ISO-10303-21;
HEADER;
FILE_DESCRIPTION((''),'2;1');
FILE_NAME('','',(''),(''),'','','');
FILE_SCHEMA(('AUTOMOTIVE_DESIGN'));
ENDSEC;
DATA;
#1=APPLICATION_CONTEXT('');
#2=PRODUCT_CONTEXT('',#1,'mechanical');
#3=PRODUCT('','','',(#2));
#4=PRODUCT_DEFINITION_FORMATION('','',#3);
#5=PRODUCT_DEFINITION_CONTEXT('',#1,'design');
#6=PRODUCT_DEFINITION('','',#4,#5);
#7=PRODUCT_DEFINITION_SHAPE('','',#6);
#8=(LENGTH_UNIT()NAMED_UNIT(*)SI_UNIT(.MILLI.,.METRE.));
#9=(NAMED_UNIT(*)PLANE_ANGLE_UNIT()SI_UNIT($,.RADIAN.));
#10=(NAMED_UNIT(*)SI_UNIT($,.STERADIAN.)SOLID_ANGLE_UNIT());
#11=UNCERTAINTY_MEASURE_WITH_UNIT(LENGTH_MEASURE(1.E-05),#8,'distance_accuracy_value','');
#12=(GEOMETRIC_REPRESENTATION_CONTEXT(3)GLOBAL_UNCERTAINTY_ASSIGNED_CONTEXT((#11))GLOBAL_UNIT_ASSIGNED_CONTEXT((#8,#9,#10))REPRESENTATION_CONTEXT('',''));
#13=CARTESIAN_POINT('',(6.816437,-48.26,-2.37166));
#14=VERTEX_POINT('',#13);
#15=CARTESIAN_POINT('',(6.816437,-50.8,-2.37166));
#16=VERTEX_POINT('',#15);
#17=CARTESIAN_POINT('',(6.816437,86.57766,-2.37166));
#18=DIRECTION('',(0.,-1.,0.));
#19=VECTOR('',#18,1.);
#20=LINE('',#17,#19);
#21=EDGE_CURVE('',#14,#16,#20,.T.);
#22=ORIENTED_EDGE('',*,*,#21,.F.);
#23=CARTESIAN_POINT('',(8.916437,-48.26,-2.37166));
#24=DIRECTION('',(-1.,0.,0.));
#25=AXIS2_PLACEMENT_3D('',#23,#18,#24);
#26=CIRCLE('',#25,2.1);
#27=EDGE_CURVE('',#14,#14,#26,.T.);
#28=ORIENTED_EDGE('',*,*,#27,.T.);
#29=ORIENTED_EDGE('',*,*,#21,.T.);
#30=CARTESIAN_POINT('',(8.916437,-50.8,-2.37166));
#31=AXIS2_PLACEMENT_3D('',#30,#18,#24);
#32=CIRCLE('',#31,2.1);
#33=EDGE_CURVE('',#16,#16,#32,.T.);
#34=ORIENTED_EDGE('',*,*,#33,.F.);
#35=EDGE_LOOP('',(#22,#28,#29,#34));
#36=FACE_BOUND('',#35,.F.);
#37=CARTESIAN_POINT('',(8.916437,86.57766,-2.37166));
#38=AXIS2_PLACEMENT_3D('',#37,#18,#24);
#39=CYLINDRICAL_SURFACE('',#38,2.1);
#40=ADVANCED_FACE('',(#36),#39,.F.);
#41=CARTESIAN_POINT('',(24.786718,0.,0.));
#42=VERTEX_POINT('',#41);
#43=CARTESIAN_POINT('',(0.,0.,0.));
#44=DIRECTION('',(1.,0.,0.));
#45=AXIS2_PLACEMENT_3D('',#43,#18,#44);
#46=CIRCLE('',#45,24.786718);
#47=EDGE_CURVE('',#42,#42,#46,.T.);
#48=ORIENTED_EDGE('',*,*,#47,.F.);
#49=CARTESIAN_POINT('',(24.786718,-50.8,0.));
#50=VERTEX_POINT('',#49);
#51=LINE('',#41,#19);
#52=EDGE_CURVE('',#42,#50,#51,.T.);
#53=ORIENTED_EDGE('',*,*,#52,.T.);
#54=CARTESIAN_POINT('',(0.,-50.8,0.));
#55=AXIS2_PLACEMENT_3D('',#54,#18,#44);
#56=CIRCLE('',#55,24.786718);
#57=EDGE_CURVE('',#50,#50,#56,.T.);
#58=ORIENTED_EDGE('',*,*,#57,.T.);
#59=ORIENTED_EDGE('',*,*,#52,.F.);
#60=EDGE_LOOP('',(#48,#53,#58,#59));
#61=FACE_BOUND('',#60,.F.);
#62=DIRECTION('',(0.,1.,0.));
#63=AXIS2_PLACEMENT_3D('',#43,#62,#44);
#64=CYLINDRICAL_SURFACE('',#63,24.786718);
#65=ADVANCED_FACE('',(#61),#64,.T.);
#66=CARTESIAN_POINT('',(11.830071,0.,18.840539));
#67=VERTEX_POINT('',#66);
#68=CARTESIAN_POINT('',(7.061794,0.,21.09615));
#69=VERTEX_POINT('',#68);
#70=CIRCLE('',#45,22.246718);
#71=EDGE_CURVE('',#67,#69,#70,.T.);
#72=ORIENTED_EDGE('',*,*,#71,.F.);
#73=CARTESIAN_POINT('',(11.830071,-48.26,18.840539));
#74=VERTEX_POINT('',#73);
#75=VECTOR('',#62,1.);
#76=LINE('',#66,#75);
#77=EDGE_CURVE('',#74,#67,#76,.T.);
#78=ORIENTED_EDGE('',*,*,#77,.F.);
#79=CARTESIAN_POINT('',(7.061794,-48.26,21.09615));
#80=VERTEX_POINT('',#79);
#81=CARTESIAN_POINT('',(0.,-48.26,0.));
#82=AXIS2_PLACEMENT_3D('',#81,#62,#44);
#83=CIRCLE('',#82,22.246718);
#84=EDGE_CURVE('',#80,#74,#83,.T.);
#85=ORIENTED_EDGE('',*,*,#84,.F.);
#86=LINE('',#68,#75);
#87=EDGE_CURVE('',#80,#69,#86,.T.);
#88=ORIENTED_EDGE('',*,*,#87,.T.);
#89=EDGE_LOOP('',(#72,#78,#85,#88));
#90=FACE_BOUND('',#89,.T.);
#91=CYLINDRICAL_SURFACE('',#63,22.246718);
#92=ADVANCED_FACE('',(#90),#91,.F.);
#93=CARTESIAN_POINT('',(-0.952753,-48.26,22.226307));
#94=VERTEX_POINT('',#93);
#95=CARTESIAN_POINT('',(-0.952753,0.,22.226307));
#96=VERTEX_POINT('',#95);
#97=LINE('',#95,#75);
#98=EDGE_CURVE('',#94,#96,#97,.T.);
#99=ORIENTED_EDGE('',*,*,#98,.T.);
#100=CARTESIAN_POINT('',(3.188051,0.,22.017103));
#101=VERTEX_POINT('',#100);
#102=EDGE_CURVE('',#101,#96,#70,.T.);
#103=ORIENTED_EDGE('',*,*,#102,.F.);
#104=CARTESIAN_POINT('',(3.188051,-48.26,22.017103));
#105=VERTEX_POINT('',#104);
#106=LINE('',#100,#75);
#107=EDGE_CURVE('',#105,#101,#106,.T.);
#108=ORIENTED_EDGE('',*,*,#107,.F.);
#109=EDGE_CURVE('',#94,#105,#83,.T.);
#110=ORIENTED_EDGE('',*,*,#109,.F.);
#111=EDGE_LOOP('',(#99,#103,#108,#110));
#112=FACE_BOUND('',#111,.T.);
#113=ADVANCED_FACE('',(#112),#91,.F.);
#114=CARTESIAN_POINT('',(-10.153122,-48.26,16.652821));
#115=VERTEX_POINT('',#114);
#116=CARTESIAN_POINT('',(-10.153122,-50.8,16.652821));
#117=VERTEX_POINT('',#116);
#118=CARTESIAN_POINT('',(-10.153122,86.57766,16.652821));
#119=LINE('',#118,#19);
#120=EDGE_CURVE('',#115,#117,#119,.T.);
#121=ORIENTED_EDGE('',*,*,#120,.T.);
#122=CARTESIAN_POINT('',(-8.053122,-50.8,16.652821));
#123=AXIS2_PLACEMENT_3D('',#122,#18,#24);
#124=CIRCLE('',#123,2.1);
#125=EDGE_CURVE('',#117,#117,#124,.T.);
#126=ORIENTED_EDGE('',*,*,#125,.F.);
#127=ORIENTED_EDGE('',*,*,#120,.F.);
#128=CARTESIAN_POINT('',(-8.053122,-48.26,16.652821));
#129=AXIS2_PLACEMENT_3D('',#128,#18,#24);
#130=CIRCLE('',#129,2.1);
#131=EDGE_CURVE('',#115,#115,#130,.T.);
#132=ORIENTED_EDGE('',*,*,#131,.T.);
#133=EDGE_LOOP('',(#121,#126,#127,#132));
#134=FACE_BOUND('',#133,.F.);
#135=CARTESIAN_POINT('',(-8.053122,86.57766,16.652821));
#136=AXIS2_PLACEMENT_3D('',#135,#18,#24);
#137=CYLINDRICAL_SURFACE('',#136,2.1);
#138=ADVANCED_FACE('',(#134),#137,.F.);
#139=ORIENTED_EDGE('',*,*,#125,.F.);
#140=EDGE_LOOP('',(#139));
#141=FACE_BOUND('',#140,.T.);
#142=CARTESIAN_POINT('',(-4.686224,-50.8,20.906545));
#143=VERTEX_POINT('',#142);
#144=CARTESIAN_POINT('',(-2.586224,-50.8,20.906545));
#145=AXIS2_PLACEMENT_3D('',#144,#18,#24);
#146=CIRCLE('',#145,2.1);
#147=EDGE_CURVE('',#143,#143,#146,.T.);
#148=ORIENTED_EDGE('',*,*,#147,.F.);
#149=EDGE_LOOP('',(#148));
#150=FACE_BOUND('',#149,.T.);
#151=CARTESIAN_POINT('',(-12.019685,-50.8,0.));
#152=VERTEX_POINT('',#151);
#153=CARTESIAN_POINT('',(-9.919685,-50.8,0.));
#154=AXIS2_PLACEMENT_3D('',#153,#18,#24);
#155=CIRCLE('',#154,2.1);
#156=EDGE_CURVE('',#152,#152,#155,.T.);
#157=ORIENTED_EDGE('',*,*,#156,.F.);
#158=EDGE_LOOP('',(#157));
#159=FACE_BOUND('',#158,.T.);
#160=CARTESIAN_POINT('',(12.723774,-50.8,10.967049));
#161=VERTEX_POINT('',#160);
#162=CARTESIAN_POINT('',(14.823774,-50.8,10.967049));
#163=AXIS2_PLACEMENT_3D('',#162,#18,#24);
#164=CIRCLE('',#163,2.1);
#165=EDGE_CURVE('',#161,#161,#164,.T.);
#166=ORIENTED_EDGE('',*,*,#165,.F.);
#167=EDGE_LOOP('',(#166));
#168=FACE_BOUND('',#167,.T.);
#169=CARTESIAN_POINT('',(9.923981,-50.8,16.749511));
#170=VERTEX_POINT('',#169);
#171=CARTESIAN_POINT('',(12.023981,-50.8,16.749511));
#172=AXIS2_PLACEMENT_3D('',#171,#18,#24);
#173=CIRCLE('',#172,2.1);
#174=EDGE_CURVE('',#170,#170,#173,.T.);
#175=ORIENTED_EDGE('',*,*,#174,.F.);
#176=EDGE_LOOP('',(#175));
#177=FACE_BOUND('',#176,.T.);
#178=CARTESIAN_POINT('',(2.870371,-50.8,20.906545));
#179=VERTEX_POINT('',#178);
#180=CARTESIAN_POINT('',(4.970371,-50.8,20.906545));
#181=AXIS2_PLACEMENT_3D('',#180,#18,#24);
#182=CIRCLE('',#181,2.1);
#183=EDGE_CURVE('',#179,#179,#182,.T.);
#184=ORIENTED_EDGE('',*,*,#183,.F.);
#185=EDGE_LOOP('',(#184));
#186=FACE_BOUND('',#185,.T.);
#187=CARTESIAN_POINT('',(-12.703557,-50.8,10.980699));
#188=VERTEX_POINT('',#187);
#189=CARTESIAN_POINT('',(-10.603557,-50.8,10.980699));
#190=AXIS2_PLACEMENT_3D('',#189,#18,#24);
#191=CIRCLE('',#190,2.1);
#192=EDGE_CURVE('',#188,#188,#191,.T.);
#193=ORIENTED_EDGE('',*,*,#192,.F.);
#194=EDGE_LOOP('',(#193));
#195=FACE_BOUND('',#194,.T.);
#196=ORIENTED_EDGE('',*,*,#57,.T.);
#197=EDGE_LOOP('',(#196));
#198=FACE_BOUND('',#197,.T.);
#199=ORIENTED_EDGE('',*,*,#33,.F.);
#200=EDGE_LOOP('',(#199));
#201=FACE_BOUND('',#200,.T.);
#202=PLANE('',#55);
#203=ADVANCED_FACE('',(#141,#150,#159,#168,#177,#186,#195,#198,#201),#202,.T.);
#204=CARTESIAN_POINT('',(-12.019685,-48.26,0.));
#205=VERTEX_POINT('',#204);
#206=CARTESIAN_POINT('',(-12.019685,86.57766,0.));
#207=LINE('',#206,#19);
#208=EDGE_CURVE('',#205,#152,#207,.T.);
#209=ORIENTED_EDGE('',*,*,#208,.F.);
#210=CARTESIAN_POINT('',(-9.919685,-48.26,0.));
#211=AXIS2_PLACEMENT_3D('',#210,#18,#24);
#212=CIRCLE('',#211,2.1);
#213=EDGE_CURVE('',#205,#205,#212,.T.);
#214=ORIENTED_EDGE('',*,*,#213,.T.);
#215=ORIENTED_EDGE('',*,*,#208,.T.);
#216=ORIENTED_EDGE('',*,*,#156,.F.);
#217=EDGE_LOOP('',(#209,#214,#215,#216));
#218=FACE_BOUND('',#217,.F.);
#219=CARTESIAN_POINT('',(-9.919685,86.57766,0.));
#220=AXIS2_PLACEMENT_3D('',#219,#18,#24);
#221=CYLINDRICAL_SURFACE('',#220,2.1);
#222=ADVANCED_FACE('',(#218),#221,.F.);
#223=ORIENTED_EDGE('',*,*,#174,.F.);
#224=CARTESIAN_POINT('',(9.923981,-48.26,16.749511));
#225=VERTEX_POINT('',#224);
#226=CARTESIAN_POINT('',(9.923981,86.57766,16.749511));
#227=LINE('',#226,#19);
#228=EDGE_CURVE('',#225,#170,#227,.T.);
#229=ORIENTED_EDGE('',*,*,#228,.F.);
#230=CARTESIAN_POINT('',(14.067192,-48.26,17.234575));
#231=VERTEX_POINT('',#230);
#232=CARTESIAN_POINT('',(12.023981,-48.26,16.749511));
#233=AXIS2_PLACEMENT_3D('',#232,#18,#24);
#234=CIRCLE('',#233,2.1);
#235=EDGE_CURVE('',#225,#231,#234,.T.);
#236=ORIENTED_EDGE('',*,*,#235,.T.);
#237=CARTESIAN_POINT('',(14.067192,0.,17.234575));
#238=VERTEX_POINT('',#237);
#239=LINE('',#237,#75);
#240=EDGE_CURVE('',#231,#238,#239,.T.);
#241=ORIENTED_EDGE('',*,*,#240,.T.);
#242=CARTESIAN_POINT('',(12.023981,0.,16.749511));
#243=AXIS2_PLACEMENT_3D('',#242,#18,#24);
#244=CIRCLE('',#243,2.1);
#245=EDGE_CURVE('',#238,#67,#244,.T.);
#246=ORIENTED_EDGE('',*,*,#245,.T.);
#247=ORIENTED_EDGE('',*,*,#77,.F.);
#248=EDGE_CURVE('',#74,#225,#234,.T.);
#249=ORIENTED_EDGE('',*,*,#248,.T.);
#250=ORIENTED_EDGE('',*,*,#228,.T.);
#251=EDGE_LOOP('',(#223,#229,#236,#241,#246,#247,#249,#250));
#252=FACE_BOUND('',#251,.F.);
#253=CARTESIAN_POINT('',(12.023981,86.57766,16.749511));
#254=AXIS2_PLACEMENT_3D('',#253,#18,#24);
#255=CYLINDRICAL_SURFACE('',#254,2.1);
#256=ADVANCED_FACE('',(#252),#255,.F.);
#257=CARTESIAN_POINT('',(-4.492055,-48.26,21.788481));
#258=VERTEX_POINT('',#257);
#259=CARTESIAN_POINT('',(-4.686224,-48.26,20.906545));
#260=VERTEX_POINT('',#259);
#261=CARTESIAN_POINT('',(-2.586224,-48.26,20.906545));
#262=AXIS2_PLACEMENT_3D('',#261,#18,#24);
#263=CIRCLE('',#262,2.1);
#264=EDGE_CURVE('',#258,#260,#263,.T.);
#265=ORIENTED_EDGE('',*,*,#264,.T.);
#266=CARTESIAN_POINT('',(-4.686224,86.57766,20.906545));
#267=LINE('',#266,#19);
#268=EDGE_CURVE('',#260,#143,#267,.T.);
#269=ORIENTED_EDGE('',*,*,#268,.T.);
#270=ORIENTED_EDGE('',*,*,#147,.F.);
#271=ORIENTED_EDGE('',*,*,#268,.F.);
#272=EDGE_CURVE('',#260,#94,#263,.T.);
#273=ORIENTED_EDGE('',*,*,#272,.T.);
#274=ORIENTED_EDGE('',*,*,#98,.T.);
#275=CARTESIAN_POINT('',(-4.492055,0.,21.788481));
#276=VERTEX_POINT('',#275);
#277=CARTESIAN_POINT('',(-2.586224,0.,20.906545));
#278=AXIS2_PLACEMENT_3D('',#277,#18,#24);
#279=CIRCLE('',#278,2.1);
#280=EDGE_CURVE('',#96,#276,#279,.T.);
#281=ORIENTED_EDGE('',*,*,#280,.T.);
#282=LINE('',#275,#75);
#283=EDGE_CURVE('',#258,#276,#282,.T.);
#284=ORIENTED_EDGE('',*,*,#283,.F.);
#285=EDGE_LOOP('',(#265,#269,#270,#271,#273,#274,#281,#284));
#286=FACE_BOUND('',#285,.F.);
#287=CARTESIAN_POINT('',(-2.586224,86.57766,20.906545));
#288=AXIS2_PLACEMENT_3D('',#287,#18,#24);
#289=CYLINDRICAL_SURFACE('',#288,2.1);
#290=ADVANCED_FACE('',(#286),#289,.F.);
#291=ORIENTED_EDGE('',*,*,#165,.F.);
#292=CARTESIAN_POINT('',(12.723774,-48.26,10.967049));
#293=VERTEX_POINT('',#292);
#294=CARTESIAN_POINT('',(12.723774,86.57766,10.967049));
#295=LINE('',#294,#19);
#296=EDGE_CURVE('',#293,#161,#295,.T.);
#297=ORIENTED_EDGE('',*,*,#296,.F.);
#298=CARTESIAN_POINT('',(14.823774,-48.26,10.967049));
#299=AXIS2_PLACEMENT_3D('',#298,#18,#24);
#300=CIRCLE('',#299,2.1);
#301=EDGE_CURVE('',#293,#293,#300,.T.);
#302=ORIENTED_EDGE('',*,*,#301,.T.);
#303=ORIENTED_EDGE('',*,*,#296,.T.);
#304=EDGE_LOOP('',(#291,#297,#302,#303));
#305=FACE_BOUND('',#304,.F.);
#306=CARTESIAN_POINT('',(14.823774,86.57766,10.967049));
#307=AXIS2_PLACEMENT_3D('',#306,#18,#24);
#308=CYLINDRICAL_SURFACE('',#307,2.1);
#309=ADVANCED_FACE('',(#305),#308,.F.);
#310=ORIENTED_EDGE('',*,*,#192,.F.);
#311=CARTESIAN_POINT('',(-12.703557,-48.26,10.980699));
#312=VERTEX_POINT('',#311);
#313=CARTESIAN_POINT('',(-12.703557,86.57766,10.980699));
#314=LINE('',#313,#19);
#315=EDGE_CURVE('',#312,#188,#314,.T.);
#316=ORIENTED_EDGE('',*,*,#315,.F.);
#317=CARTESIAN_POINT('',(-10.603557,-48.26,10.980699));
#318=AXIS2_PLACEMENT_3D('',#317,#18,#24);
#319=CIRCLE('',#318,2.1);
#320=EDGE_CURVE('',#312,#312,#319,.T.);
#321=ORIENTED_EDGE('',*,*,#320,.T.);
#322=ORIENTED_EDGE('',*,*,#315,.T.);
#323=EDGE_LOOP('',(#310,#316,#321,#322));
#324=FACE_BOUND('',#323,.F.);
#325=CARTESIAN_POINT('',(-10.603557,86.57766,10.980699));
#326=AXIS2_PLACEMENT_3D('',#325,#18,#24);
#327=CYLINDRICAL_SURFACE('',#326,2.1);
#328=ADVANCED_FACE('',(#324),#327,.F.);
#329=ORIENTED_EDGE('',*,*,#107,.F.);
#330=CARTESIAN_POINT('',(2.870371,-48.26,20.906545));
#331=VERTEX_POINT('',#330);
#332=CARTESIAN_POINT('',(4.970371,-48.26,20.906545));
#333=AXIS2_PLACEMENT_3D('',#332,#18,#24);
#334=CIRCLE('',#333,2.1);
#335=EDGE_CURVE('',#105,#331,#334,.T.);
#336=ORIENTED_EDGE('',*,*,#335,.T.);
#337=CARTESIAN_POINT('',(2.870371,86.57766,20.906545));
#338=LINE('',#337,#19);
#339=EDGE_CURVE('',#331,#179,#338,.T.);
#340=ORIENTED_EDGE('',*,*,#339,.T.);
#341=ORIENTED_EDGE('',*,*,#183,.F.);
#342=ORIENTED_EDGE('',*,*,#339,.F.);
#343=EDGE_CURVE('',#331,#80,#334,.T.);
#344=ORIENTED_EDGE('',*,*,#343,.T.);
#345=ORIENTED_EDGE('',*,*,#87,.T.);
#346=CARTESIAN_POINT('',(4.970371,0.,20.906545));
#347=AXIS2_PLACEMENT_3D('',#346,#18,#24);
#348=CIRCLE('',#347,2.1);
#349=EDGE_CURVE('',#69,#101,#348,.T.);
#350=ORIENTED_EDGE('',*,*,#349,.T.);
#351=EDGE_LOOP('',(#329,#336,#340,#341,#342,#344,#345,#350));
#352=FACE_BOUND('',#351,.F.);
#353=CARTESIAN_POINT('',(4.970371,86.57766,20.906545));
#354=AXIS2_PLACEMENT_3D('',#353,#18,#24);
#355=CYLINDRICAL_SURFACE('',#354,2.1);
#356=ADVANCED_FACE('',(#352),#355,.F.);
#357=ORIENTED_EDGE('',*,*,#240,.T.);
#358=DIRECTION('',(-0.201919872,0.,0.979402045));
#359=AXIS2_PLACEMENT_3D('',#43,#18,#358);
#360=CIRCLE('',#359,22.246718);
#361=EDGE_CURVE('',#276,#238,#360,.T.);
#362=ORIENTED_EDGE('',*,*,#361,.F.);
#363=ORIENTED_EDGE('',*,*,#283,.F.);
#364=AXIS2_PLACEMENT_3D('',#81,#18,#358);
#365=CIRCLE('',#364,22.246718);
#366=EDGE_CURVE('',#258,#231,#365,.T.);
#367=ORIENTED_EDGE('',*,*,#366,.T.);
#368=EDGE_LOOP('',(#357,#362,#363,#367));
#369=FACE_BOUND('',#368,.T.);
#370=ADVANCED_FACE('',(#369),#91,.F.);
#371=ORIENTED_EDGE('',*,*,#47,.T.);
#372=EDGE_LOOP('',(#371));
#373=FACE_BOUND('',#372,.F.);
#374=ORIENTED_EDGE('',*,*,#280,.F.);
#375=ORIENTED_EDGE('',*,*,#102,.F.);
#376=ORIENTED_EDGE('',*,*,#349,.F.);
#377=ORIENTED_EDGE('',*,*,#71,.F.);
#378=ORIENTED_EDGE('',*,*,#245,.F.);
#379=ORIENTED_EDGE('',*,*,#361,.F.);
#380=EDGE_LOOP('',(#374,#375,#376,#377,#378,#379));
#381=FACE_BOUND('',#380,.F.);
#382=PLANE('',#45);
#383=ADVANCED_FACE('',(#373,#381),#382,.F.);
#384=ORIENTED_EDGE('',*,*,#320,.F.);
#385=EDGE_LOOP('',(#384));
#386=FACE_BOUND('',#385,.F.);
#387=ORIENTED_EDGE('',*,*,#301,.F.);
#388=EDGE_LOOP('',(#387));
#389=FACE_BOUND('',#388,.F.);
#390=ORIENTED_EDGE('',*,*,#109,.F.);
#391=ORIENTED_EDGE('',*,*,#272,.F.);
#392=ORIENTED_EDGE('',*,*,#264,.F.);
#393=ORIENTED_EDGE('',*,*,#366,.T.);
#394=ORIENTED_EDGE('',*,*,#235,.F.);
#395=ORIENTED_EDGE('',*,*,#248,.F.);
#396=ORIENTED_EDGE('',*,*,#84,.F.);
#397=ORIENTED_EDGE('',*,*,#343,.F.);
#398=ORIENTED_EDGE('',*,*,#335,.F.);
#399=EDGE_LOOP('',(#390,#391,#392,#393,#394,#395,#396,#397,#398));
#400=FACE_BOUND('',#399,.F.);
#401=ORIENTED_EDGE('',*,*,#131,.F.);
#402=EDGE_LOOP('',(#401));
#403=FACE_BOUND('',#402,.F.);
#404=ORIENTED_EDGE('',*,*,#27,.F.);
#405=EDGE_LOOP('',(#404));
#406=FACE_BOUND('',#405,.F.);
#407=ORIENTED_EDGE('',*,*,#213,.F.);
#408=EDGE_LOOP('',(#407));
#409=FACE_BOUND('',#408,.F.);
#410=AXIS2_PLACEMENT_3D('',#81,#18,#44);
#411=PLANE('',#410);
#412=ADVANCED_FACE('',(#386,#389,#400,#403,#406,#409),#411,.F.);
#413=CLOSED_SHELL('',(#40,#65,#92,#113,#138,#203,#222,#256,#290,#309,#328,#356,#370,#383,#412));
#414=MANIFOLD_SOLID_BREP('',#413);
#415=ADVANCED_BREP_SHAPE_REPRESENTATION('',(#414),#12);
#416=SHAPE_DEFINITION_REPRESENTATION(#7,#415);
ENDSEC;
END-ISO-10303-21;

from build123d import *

# Parameters (mm, degrees)
F0_R     = 24.7867182939
F1_DEPTH = 50.8
F2_T     = -2.54
F7_D     = 4.2


# Not quite as in the source:
# - a feature of the source that left no trace in its solid (it failed there, or was rolled back) is left out


with BuildPart() as f1:
    # F0 (on Front) → F1 (new body)
    with BuildSketch(Plane.XZ):
        Circle(F0_R)
    extrude(amount=F1_DEPTH)

    # F2
    f2_openings = [f1.faces().sort_by_distance(p)[0] for p in [
        (0, 0, 0),
    ]]
    offset(amount=F2_T, openings=f2_openings)

    # F7 (through all)
    with Locations(Plane(origin=(0, 0, 0), x_dir=(1, 0, 0), z_dir=(0, 1, 0))):
        with Locations((8.9164366946, 2.3716597352), (14.8237738758, -10.9670488164), (12.0239807293, -16.7495105416), (4.9703707919, -20.9065452218), (-2.5862243492, -20.9065452218), (-8.0531220883, -16.6528206319), (-10.6035573408, -10.9806992114), (-9.9196853116, 0)):
            Hole(F7_D / 2)


solid = f1.part
